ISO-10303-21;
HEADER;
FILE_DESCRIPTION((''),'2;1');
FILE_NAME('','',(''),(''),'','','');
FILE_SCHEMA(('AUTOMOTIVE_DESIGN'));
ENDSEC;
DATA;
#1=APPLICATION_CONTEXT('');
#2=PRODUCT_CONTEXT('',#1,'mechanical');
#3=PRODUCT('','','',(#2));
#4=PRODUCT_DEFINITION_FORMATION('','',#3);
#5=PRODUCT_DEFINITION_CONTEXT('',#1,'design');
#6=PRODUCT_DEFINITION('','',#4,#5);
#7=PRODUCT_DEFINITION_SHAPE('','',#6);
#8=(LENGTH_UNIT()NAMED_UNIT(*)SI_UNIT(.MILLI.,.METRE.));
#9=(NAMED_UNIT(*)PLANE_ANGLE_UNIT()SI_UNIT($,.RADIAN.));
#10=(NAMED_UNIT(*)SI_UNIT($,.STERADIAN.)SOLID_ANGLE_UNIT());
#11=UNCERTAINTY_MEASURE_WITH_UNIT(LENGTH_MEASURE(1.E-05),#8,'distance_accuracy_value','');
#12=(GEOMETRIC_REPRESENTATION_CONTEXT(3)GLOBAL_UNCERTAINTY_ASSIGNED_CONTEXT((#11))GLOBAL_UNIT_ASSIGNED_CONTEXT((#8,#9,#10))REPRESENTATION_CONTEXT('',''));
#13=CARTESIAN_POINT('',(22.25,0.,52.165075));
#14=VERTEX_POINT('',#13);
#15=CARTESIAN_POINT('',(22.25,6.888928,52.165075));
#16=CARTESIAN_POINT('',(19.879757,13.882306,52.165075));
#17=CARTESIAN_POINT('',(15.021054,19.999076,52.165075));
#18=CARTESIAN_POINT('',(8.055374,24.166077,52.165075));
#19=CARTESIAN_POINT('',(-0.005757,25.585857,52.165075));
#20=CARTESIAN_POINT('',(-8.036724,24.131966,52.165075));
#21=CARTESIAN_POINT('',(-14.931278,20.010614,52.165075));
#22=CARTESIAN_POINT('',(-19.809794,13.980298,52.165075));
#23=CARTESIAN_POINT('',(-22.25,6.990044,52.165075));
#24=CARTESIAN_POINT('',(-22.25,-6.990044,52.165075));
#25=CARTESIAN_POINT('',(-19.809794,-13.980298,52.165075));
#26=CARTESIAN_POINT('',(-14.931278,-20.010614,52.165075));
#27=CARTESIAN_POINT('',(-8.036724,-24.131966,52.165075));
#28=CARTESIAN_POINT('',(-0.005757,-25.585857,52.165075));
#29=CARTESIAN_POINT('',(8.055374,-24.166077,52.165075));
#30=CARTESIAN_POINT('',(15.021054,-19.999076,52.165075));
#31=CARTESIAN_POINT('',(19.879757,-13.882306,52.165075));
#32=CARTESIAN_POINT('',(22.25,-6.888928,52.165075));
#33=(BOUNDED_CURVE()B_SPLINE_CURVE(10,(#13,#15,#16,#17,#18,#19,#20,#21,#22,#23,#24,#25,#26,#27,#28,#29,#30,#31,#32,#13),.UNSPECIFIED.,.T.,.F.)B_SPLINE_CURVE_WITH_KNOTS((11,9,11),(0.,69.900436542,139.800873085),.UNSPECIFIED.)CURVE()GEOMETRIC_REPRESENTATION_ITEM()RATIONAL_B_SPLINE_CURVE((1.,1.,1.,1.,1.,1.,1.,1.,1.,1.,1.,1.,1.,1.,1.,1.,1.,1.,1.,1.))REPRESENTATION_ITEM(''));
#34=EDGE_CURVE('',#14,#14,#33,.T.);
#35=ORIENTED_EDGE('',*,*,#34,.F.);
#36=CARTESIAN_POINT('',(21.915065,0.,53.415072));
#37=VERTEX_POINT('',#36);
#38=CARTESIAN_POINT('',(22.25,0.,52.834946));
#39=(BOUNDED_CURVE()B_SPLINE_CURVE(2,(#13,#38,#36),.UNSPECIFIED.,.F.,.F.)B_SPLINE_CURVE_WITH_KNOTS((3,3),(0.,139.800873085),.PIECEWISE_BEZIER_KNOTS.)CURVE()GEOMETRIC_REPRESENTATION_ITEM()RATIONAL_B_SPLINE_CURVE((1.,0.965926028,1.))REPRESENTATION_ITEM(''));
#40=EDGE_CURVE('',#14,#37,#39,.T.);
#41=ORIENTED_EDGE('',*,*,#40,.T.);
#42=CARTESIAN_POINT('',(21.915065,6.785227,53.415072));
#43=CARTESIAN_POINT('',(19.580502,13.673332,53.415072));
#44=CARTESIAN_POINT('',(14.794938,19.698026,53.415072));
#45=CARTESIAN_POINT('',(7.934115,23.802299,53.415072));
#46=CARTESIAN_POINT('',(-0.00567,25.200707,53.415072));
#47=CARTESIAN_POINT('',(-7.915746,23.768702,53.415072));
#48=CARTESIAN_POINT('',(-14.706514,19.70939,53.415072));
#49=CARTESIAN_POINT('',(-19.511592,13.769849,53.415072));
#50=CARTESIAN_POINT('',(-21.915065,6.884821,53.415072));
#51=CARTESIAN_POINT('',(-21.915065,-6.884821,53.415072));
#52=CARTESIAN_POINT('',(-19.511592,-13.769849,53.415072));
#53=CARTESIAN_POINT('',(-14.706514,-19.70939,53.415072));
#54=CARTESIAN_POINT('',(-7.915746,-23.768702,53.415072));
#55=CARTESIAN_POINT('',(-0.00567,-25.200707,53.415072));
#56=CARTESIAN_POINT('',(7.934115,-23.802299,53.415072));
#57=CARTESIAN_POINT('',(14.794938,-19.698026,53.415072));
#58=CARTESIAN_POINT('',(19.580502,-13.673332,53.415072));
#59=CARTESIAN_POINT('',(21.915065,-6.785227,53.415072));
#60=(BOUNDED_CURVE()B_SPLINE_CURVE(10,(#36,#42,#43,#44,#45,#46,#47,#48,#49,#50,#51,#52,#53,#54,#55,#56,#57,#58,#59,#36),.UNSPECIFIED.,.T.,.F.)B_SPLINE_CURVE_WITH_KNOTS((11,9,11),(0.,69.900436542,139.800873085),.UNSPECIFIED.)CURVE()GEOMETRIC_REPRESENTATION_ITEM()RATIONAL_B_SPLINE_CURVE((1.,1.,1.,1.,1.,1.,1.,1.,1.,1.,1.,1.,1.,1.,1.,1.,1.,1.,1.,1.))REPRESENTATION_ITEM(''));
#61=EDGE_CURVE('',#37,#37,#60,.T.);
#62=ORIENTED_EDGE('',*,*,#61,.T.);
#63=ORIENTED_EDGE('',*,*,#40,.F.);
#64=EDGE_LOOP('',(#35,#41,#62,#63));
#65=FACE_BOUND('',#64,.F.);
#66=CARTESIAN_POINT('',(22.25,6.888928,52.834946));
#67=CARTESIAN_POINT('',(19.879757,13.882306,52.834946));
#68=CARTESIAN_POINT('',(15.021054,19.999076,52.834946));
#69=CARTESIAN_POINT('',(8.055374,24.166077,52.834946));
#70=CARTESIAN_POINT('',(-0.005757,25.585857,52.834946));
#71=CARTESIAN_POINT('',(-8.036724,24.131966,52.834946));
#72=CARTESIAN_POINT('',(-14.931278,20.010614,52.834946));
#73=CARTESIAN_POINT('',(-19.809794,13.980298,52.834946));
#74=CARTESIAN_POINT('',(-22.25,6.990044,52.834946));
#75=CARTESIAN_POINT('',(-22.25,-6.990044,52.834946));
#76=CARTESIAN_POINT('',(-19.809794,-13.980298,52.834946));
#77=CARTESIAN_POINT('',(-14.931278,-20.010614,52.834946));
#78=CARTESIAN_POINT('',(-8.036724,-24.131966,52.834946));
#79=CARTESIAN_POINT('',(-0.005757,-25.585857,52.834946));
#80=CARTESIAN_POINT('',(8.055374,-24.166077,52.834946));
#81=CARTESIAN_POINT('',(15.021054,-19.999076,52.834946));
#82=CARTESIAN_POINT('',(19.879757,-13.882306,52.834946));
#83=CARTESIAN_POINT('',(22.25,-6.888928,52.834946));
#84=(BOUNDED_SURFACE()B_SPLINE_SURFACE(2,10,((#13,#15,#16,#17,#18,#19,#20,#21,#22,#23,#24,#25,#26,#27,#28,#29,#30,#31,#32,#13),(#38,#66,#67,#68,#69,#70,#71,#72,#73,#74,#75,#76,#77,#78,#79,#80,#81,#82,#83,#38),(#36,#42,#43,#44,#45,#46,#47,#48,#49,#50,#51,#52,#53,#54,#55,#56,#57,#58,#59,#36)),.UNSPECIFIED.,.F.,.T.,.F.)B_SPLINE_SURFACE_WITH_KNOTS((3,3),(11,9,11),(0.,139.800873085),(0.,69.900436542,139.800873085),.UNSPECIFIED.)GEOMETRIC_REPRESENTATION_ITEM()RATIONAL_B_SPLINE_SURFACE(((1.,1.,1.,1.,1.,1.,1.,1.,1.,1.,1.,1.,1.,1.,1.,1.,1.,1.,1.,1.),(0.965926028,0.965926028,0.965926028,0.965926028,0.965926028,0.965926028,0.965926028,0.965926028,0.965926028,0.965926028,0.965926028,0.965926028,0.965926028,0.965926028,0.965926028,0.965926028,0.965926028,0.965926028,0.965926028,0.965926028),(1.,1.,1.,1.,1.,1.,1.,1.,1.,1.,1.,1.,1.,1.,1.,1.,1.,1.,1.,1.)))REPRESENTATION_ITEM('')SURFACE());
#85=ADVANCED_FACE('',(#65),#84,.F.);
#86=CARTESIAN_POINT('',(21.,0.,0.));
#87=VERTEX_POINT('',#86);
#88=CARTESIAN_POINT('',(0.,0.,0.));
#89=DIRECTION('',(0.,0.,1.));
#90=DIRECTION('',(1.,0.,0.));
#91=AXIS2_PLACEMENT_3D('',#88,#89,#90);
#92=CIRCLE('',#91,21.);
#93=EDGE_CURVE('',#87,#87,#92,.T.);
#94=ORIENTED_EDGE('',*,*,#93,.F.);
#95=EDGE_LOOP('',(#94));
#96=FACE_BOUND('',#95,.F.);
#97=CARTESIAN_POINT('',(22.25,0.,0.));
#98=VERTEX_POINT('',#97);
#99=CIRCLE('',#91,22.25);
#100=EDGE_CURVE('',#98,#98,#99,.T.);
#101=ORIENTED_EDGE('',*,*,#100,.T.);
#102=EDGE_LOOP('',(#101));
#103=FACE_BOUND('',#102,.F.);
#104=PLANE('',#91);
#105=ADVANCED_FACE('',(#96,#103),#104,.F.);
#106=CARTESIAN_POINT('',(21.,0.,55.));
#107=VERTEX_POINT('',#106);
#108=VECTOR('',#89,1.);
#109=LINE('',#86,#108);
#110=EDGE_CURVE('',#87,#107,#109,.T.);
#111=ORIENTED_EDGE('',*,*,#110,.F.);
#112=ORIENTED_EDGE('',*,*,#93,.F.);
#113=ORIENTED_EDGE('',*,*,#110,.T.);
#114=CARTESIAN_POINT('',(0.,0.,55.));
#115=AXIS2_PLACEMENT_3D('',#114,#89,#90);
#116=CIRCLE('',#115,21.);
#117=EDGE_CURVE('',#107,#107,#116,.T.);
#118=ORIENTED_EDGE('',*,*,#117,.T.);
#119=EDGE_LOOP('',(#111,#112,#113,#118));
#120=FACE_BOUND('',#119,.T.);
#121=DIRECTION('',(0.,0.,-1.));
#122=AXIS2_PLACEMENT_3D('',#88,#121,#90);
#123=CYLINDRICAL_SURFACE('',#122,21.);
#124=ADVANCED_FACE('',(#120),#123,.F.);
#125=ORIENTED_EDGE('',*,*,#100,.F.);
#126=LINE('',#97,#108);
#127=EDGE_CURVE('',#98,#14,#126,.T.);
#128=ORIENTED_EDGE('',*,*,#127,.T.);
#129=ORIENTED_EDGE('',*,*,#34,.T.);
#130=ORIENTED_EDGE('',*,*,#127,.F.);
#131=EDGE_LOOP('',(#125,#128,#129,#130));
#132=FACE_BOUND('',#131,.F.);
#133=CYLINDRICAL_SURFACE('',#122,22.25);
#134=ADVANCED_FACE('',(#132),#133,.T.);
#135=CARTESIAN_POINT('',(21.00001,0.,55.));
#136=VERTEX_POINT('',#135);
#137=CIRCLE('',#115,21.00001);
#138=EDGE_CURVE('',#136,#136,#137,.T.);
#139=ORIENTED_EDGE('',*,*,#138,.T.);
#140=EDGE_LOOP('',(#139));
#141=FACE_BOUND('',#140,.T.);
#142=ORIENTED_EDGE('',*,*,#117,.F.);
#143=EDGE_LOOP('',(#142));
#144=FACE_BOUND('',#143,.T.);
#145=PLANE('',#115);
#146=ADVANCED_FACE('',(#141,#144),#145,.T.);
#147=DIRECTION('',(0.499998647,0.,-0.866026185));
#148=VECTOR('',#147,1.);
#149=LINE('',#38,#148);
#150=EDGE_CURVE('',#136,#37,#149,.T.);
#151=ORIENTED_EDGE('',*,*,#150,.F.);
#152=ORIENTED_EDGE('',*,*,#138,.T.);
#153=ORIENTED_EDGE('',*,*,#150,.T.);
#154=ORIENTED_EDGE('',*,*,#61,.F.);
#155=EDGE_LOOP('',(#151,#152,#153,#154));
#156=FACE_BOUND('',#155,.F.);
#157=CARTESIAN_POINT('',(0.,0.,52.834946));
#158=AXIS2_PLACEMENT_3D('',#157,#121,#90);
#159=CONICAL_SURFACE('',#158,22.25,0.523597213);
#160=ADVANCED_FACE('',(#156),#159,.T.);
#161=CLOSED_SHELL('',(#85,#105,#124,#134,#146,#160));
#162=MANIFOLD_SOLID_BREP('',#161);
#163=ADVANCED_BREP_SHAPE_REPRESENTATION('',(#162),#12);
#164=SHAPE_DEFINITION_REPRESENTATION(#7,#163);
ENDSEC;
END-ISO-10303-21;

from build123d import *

# Parameters (mm, degrees)
F0_R     = 22.25
F0_R_2   = 21
F1_DEPTH = 55
F2_SIZE2 = 2.165054
F2_SIZE  = 1.24999
F3_R     = 2.5


# Not quite as in the source:
# - a fillet or chamfer is up to 0.001 mm smaller than in the source, because OpenCascade refuses the exact size


with BuildPart() as f1:
    # F0 (on Top) → F1 (new body)
    with BuildSketch(Plane.XY):
        Circle(F0_R)
        Circle(F0_R_2, mode=Mode.SUBTRACT)
    extrude(amount=F1_DEPTH)

    # F2 (size 1.25 and 2.1650635095 in the source; OpenCascade refuses exactly that, so slightly less here)
    f2_edges = [f1.edges().sort_by_distance(p)[0] for p in [
        (-22.25, 0, 55),
    ]]
    f2_side = f1.faces().sort_by_distance((-21.620675, 0, 55))[0]
    chamfer(f2_edges, length=F2_SIZE, length2=F2_SIZE2, reference=f2_side)

    # F3
    f3_edges = [f1.edges().sort_by_distance(p)[0] for p in [
        (-22.25, 0, 52.834946),
    ]]
    fillet(f3_edges, radius=F3_R)


solid = f1.part
